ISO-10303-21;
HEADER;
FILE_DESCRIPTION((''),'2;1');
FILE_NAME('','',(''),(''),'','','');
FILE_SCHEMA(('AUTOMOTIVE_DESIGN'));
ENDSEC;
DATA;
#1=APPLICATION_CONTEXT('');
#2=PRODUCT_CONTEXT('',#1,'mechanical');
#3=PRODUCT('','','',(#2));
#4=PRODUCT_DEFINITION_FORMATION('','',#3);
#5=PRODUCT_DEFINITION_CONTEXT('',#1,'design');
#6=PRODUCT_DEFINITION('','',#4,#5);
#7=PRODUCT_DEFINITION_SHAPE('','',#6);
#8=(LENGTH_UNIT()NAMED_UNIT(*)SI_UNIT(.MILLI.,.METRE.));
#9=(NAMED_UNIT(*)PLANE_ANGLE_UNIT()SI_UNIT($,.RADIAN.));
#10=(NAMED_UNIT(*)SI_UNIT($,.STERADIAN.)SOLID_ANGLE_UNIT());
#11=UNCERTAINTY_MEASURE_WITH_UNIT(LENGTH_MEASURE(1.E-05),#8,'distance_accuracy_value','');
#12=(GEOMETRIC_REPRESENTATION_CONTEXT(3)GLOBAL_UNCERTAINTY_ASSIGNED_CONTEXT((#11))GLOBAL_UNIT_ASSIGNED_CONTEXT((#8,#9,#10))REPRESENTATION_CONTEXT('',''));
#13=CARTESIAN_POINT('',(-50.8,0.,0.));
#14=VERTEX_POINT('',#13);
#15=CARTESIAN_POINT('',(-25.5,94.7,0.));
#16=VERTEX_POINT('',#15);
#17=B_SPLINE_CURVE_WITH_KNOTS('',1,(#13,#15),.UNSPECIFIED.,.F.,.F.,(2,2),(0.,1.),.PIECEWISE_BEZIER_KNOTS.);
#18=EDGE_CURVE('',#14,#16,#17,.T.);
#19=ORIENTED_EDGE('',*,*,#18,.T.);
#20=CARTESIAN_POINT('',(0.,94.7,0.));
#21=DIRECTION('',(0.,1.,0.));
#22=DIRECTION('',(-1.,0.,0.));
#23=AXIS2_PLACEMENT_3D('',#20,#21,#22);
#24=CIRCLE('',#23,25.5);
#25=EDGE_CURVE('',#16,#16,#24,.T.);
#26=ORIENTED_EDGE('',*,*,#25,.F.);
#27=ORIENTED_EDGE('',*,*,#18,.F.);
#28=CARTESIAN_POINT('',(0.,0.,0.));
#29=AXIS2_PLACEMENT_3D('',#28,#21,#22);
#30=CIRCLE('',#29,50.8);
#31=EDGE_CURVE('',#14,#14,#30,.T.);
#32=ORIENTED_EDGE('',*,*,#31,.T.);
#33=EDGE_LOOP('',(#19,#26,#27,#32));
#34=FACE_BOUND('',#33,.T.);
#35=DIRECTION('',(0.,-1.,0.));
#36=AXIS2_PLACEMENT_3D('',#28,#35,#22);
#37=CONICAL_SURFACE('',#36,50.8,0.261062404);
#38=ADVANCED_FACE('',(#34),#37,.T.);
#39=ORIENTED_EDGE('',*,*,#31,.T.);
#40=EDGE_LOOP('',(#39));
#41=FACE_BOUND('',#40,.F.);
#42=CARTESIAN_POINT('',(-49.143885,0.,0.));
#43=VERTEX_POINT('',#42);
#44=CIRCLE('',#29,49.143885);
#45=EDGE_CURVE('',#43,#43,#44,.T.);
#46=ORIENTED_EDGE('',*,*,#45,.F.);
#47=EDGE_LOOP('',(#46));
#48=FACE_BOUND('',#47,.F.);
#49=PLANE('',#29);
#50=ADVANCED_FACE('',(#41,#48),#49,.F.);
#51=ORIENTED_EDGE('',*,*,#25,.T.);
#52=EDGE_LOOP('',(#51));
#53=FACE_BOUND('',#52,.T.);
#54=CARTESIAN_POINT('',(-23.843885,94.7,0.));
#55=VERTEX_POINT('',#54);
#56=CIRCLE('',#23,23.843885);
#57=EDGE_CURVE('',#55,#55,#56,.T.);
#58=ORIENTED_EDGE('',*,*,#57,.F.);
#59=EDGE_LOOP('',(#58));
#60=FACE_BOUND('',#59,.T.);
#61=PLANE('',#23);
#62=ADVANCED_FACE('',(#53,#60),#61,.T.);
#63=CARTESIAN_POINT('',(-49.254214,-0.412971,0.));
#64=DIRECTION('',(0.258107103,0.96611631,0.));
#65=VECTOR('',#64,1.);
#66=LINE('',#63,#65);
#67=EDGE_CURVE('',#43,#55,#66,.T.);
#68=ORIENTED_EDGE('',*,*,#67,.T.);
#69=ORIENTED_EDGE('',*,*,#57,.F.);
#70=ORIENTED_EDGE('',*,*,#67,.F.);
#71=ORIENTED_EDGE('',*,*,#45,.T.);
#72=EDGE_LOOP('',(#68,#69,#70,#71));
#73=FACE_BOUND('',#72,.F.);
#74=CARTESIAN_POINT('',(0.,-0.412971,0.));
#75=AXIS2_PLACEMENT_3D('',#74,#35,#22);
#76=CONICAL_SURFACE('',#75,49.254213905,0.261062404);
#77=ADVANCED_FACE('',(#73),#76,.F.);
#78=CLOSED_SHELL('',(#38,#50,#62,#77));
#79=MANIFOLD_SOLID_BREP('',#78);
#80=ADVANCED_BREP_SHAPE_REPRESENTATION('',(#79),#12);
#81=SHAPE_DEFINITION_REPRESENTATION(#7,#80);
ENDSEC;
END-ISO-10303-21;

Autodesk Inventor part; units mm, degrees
ref_plane "YZ Plane" through (0, 0, 0) normal (1, 0, 0) x (0, 1, 0)
ref_plane "XY Plane" through (0, 0, 0) normal (0, 0, 1) x (1, 0, 0)
sketch "Szkic6" plane through (0, 0, 0) normal (0, 1, 0) x (-1, 0, 0)
  circle A0 centre (0, 0) radius 50.8
  dimension "d33" = 101.6
ref_plane "Płaszczyzna konstrukcyjna1" through (0, 94.7, 0) normal (0, 1, 0) x (-1, 0, 0)
sketch "Szkic7" plane through (0, 94.7, 0) normal (0, 1, 0) x (-1, 0, 0)
  circle A0 centre (0, 0) radius 25.5
  dimension "d35" = 51
loft "Wyciągnięcie złożone1" add profiles "Szkic6", "Szkic7"
shell "Skorupa1" thickness 1.6 removed faces 2 at (4.5479, 94.7, -4.6843) at (7.3018, 0, 11.5135)
equation "\"d33\" = OD1"
equation "\"d35\" = OD2"
equation "\"d52\" = THK"
equation "\"SzerokośćGięciaPodcięcia\" = Grubość"
equation "\"RozmiarPodcięciaNarożnika\" = 4 * Grubość"
equation "\"PromieńPrzejścia\" = PromieńGięcia"
equation "\"Rozmiar_promienia_Jacobiego\" = PromieńGięcia"
equation "\"Wielk_odstępu\" = Grubość"
equation "\"d2\" = PromieńGięcia"
equation "\"d23\" = PromieńGięcia"
equation "\"OD1\" = 101.6"
equation "\"OD2\" = 51"
equation "\"L\" = 94.7"
equation "\"THK\" = 1.6"
equation "\"d34\" = L"
equation "\"Grubość\" = 1.5"
equation "\"PromieńGięcia\" = 3"
properties part number "Redukcja symetryczna Ø101,6x51x1,6 L=94,7" material "304"
